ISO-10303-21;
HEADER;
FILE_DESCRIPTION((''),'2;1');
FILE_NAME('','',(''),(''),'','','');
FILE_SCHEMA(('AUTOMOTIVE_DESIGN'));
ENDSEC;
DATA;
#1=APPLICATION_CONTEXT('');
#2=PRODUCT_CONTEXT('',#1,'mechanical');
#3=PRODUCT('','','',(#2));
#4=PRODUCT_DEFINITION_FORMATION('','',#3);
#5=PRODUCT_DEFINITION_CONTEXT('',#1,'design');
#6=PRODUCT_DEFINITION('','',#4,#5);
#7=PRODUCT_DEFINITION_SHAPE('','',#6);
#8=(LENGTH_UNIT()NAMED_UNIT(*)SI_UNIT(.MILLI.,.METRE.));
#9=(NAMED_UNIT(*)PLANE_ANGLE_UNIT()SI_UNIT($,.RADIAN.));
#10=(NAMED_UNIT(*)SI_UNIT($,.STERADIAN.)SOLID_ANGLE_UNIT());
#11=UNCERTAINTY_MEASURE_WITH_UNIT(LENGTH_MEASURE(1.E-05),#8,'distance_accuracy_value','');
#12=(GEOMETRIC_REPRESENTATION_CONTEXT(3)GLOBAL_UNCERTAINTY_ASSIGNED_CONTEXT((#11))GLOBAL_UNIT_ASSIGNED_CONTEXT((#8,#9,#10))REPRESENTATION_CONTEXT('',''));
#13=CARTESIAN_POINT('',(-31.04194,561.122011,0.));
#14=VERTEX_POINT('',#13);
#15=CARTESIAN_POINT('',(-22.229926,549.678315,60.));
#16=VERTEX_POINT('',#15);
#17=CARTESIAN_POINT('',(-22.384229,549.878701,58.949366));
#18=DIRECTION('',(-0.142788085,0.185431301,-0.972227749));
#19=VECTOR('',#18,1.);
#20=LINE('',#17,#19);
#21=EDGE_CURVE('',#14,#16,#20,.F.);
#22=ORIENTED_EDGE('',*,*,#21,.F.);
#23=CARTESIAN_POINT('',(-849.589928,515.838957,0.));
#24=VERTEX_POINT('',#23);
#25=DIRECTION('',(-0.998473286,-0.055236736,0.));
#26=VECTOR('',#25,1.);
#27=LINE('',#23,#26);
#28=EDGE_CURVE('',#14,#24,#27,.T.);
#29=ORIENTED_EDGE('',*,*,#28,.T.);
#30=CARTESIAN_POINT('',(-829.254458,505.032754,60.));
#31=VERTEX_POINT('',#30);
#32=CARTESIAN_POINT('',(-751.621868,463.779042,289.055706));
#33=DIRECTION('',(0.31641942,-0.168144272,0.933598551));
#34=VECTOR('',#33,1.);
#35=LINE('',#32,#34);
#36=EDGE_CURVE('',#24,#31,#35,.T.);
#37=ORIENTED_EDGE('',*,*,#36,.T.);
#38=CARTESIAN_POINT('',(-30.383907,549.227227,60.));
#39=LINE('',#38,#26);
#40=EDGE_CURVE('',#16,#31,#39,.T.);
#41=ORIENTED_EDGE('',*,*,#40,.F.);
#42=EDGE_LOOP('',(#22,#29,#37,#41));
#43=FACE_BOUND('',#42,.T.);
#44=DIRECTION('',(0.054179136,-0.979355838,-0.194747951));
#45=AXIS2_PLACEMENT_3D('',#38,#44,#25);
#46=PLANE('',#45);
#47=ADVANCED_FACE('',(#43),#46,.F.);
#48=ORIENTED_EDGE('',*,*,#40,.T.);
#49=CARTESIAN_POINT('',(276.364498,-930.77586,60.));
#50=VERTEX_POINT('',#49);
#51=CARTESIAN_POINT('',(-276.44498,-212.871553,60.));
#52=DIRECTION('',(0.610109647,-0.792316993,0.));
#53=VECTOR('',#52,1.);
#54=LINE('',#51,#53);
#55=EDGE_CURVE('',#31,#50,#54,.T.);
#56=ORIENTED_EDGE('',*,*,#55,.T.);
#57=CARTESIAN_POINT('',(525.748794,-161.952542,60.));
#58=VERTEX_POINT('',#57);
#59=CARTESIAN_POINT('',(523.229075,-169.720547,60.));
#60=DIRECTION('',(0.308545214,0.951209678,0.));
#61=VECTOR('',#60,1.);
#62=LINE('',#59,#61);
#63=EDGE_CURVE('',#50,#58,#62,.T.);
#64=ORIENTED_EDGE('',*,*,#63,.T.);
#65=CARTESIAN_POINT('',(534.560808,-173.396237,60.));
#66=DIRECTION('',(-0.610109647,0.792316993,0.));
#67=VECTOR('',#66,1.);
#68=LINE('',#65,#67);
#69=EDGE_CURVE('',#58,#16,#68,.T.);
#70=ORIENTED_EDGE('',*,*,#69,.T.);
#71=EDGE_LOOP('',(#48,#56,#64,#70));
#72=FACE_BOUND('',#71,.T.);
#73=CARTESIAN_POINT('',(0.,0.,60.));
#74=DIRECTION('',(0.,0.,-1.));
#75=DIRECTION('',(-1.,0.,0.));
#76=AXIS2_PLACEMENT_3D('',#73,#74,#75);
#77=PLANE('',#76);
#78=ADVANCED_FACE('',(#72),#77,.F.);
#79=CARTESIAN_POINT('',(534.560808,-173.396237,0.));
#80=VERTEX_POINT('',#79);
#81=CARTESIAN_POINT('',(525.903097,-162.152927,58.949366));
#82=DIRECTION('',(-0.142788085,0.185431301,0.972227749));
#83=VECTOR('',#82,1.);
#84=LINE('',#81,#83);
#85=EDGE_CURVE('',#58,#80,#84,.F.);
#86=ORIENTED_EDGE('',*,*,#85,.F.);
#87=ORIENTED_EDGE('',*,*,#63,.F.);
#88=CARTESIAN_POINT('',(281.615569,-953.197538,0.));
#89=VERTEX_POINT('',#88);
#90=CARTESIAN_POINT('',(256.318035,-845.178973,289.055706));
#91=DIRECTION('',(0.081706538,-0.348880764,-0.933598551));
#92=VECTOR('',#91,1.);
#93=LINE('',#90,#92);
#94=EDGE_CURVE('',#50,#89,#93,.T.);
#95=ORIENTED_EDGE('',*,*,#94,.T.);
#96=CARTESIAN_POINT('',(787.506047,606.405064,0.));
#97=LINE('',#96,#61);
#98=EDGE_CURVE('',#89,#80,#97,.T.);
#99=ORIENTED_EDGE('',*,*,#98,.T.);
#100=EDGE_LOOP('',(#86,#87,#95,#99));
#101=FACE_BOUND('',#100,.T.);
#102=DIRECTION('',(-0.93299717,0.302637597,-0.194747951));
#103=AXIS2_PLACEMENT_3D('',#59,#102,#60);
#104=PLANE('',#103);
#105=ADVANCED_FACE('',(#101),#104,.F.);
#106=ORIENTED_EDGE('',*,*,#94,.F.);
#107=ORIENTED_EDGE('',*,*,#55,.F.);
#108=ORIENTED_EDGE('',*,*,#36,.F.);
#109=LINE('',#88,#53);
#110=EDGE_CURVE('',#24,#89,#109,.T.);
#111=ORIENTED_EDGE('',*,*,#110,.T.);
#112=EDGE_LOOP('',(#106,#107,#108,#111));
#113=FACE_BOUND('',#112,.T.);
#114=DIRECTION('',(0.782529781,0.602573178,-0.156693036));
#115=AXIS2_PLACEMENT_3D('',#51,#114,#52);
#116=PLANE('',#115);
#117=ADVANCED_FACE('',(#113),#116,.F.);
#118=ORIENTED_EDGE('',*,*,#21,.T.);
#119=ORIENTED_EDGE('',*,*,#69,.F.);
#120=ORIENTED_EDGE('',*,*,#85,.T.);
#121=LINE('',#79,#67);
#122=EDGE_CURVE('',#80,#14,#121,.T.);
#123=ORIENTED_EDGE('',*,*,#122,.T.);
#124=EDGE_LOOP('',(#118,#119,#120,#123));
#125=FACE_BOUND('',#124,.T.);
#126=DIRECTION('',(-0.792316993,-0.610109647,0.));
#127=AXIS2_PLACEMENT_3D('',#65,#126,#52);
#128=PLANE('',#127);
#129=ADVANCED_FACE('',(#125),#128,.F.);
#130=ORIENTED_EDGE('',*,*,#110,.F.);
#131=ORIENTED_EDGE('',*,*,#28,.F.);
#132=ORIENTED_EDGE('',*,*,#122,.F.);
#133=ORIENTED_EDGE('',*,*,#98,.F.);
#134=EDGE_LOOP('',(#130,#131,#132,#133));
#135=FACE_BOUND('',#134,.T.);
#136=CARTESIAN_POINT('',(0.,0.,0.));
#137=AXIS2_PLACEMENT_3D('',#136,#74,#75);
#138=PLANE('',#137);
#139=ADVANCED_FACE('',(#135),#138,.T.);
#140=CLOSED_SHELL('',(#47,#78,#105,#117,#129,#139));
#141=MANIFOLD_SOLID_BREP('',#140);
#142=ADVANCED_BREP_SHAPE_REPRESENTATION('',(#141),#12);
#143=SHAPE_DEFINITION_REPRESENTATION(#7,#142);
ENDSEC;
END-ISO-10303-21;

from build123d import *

# Parameters (mm, degrees)
EXTRUDE_1_DEPTH    = 60
CHAMFER3_SIZE2     = 11.912970931
CHAMFER3_SIZE      = 60
CHAMFER4_SIZE2     = 11.912970931
CHAMFER4_SIZE      = 60
CHAMFER5_SIZE2     = 9.519169095
CHAMFER5_SIZE      = 60
CUT_EXTRUDE1_DEPTH = 1279.275631979


with BuildPart() as part:
    # Эскиз1 → Бобышка-Вытянуть1 (new body)
    with BuildSketch(Plane.XY):
        Polygon((-849.589927609, 515.838957491), (787.506047005, 606.405063543), (281.615569427, -953.197537878), align=None)
    extrude(amount=EXTRUDE_1_DEPTH)

    # Chamfer3
    chamfer3_edges = [part.edges().sort_by_distance(p)[0] for p in [
        (-31.041940302, 561.122010517, 60),
    ]]
    chamfer3_side = [part.faces().sort_by_distance(p)[0] for p in [
        (-31.041940302, 561.122010517, 59.761740581),
    ]]
    chamfer(chamfer3_edges, length=CHAMFER3_SIZE - 0.0001, length2=CHAMFER3_SIZE2 - 0.0001, reference=chamfer3_side[0])  # a hair under: the kernel refuses the full size

    # Chamfer4
    chamfer4_edges = [part.edges().sort_by_distance(p)[0] for p in [
        (532.590398399, -179.470785737, 60),
    ]]
    chamfer4_side = [part.faces().sort_by_distance(p)[0] for p in [
        (532.590398399, -179.470785737, 59.761740581),
    ]]
    chamfer(chamfer4_edges, length=CHAMFER4_SIZE - 0.0001, length2=CHAMFER4_SIZE2 - 0.0001, reference=chamfer4_side[0])  # a hair under: the kernel refuses the full size

    # Chamfer5
    chamfer5_edges = [part.edges().sort_by_distance(p)[0] for p in [
        (-283.987179091, -218.679290193, 60),
    ]]
    chamfer5_side = [part.faces().sort_by_distance(p)[0] for p in [
        (-283.987179091, -218.679290193, 59.809616618),
    ]]
    chamfer(chamfer5_edges, length=CHAMFER5_SIZE - 0.0001, length2=CHAMFER5_SIZE2 - 0.0001, reference=chamfer5_side[0])  # a hair under: the kernel refuses the full size

    # Sketch1 → Cut-Extrude1 (cut, through all)
    with BuildSketch(Plane(origin=(0, 0, 0), x_dir=(-1, 0, 0), z_dir=(0, 0, -1))):
        Polygon((-534.560808216, -173.396237168), (31.041940302, 561.122010517), (-787.506047005, 606.405063543), align=None)
    extrude(amount=-CUT_EXTRUDE1_DEPTH, mode=Mode.SUBTRACT)


solid = part.part
